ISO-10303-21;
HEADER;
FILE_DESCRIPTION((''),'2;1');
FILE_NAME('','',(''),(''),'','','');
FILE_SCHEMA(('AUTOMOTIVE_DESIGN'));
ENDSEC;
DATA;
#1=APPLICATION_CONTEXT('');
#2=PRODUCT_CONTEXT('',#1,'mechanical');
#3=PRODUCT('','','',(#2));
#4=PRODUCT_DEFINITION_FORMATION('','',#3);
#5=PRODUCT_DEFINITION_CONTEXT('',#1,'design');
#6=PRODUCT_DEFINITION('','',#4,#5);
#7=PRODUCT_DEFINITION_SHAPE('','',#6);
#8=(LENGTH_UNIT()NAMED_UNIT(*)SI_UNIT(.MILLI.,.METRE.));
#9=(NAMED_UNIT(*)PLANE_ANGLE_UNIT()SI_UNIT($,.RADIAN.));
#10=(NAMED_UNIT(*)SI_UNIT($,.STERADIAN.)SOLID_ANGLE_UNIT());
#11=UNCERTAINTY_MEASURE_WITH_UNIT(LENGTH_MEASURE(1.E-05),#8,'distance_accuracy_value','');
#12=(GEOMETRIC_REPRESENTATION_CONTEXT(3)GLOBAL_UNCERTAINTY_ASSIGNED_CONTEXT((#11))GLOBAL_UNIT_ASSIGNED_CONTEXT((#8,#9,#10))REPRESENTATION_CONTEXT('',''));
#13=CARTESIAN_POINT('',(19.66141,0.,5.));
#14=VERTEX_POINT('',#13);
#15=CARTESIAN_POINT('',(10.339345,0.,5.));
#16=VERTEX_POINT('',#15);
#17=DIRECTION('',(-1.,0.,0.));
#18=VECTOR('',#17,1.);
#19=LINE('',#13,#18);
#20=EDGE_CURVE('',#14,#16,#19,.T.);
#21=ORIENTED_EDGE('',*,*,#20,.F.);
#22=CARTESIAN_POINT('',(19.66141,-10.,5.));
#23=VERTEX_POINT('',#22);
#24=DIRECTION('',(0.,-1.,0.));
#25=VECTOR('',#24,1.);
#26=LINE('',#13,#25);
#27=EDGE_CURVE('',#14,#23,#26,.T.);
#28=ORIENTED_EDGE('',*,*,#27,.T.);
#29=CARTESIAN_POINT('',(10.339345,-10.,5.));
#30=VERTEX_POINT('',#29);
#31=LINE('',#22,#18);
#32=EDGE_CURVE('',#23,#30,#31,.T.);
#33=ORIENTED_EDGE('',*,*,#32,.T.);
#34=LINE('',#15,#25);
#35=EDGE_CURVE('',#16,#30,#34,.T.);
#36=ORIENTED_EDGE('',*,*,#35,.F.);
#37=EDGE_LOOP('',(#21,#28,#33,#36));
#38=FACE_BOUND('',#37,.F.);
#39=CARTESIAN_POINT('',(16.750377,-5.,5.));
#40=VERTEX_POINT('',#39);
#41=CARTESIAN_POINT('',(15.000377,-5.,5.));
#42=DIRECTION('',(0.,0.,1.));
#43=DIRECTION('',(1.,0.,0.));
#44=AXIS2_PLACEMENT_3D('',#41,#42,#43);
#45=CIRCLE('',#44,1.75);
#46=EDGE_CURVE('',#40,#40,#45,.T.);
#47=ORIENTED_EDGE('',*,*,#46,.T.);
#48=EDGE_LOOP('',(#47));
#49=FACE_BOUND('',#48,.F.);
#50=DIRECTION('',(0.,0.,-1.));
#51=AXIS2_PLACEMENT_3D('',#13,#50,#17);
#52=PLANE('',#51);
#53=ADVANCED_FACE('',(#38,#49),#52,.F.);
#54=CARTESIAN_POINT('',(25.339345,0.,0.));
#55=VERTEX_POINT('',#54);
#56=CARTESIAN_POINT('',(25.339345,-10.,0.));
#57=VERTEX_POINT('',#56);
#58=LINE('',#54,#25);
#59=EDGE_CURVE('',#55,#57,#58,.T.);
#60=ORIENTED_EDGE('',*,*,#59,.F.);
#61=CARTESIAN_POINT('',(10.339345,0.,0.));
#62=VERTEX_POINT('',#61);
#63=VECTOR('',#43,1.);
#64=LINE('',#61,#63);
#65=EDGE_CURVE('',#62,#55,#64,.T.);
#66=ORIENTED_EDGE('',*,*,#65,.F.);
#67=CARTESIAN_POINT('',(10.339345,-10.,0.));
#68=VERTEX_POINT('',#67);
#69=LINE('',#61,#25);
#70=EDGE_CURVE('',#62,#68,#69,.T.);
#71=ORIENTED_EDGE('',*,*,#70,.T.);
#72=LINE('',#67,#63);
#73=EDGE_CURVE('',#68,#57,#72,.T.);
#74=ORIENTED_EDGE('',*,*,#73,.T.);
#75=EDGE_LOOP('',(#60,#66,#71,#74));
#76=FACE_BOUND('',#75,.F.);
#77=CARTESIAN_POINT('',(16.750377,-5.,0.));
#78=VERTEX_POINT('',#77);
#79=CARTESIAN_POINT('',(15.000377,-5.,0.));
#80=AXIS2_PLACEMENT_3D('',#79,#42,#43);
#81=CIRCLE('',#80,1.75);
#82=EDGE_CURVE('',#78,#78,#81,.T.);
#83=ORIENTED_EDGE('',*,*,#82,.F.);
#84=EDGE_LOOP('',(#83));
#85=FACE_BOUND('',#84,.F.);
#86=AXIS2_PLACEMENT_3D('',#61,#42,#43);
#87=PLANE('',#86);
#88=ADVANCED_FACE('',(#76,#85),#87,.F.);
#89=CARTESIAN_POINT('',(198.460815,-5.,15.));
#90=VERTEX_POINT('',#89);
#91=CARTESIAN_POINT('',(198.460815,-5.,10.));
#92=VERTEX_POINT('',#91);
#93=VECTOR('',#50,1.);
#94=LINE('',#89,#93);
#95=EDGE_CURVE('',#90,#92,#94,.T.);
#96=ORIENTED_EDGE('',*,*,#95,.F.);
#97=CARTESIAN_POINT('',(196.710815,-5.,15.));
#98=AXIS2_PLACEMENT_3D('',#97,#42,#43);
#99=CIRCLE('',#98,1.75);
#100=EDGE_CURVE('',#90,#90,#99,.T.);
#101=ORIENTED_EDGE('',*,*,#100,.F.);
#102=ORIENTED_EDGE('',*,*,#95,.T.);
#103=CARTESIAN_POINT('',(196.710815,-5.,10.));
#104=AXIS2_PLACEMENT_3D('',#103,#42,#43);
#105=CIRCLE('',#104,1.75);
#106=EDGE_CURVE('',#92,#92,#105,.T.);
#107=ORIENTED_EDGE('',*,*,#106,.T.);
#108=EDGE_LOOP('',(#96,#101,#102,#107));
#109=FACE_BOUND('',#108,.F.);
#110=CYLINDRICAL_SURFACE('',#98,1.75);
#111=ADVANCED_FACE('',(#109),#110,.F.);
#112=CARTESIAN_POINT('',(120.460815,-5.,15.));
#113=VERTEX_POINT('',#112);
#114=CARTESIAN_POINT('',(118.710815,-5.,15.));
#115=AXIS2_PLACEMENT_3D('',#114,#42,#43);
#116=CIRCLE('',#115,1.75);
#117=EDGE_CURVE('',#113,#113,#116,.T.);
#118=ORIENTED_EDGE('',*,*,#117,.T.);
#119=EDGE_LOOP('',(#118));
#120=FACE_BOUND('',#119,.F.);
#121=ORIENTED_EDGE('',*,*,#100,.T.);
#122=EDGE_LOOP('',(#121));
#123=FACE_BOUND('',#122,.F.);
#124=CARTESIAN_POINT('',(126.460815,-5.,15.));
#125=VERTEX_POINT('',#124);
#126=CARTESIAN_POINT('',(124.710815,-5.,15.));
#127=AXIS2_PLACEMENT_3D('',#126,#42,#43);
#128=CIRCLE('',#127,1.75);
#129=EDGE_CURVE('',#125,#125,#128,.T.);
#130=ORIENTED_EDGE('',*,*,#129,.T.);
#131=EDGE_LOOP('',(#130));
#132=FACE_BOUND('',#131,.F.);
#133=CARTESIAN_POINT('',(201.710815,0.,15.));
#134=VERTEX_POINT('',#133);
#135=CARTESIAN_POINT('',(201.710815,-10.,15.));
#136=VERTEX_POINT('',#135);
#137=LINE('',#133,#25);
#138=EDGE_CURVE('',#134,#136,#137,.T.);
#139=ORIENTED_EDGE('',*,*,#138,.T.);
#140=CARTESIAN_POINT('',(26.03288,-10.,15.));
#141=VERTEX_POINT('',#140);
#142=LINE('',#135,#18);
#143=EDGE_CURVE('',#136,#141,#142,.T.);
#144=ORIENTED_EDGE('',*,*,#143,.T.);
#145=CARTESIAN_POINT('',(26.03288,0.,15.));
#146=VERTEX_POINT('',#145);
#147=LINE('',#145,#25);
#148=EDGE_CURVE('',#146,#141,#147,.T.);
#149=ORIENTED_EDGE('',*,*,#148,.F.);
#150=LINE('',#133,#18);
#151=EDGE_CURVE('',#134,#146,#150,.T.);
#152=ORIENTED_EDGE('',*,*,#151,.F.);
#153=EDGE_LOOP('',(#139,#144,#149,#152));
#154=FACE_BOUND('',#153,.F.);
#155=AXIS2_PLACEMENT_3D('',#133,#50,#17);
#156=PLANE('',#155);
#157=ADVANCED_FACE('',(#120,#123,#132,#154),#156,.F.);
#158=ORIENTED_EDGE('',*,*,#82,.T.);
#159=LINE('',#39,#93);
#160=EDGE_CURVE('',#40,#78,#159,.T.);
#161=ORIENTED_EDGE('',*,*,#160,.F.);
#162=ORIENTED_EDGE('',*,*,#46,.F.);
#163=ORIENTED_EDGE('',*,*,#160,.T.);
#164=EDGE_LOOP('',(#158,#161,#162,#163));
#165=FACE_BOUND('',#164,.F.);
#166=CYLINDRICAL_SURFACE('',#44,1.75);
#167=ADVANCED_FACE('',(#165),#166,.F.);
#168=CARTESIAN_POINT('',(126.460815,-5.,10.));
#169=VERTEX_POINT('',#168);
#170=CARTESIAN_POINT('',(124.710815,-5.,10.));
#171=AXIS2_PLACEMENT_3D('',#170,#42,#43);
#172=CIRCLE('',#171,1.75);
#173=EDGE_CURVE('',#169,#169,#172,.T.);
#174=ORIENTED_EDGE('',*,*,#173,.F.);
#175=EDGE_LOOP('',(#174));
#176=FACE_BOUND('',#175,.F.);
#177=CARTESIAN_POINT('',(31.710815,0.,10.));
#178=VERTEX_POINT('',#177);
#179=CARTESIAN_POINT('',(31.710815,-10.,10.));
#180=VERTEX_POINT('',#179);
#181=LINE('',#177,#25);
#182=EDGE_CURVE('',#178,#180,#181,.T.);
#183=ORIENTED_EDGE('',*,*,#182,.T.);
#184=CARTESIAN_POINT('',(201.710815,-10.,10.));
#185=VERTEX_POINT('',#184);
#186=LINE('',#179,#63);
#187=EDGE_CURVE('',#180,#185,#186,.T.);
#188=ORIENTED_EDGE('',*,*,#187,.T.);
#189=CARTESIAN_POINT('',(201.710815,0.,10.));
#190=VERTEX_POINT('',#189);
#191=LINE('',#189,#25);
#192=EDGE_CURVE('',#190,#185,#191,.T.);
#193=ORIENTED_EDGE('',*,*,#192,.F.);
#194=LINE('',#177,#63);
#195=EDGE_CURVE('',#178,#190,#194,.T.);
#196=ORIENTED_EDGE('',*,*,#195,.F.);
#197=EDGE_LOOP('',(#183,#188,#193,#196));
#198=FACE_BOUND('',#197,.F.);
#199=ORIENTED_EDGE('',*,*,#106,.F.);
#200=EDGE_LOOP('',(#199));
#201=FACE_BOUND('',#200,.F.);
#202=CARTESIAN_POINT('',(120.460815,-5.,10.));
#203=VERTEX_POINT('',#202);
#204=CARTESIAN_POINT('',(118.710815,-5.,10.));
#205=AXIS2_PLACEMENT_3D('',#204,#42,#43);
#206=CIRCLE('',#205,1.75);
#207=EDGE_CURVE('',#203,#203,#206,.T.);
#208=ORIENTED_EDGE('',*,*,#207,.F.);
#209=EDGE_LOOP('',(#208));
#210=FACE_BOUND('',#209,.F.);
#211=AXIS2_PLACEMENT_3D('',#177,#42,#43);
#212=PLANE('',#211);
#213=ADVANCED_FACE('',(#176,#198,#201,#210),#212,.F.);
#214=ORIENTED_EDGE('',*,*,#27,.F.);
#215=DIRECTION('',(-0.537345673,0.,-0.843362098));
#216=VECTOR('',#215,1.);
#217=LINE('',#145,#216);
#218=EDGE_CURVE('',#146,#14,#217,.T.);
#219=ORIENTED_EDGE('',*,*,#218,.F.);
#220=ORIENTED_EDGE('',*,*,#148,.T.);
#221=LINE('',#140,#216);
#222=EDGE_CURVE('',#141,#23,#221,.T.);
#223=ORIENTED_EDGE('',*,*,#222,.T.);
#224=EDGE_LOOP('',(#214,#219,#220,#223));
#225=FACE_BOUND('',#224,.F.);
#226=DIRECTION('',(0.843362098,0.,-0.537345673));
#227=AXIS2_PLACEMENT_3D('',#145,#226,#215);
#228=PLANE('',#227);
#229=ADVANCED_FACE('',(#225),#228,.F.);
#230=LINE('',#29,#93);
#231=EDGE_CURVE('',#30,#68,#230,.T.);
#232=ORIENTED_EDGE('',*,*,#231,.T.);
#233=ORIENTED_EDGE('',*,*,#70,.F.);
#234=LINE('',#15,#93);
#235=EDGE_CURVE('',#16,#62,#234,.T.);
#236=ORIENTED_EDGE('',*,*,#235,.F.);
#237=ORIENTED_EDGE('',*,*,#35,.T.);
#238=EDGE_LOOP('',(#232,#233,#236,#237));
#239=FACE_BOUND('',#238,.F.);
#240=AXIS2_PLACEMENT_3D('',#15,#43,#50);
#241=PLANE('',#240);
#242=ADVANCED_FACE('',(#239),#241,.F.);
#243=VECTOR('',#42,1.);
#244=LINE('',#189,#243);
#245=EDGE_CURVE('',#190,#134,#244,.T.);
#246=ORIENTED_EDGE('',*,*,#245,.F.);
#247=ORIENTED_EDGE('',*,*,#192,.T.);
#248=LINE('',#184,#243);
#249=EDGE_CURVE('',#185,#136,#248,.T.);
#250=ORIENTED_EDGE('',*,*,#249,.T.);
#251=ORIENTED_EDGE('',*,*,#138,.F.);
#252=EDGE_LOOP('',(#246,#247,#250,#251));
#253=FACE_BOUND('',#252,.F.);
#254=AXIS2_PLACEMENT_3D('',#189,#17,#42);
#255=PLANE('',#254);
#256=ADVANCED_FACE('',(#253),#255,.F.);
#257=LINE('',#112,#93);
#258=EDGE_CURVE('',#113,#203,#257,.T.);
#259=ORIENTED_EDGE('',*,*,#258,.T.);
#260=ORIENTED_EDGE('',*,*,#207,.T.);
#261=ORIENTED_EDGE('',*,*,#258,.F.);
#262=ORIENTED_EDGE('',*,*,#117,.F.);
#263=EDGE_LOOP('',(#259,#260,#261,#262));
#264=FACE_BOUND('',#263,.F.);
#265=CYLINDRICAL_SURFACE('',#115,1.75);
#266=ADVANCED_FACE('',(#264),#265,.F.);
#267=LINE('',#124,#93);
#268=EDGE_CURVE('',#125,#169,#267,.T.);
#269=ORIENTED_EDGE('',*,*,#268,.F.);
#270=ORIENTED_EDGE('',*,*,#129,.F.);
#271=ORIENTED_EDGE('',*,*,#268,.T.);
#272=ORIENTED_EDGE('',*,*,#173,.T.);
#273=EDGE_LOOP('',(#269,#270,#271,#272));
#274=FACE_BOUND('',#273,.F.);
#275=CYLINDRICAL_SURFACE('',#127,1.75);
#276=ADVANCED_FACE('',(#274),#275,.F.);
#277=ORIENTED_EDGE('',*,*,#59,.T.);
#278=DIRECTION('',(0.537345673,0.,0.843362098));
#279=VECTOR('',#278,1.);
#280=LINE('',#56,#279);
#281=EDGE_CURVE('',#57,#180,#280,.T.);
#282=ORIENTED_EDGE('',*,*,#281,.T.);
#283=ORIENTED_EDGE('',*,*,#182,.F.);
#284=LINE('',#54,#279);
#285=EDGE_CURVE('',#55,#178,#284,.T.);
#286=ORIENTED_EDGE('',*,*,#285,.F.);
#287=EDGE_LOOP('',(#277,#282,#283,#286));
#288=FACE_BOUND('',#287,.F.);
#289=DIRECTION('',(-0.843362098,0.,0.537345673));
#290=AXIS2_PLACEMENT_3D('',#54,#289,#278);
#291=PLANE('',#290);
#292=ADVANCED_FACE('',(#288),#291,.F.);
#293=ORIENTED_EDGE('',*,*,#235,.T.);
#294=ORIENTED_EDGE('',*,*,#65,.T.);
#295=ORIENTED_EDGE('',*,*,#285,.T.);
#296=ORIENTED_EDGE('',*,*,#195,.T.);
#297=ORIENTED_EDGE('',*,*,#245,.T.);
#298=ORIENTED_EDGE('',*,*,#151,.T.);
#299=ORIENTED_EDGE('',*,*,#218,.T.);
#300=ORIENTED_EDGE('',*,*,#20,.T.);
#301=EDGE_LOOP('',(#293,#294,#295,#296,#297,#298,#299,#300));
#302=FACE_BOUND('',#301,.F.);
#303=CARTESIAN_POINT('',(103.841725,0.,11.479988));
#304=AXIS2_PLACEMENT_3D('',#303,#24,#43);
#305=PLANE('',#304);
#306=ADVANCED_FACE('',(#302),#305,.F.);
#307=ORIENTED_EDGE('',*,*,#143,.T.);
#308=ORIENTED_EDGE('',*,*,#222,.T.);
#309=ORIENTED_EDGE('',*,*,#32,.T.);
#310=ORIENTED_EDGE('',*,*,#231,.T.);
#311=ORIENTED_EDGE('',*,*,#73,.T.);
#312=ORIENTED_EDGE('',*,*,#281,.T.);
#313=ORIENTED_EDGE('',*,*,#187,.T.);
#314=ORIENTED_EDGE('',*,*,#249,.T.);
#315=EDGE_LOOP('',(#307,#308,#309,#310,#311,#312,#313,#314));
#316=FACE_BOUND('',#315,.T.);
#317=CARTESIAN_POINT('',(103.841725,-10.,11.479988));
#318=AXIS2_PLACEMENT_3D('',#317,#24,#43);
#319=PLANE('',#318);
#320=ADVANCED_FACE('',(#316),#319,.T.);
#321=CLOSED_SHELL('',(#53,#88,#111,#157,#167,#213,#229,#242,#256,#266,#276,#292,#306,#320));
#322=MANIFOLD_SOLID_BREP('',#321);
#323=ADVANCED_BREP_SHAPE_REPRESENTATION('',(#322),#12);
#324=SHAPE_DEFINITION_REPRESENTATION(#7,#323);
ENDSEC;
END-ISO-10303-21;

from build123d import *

# Parameters (mm, degrees)
F1_DEPTH = 10
F2_R     = 1.75
F3_DEPTH = 15.001
F5_DEPTH = 5.001


# Not quite as in the source:
# - a feature names something its author has since deleted; it is built from what else it names


with BuildPart() as f1:
    # F0 (on Front) → F1 (new body)
    with BuildSketch(Plane.XZ):
        Polygon((31.7108153552, 10), (201.7108153552, 10), (201.7108153552, 15), (30.3418431431, 15), (26.0328800881, 15), (19.6614095846, 5), (10.3393448517, 5), (10.3393448517, 0), (25.3393448517, 0), align=None)
    extrude(amount=F1_DEPTH)

    # F2 (on face) → F3 (cut, through all)
    with BuildSketch(Plane.XY.offset(15)):
        with Locations((118.7108153552, -5)):
            Circle(F2_R)
        with Locations((124.7108153552, -5)):
            Circle(F2_R)
        with Locations((196.7108153552, -5)):
            Circle(F2_R)
    extrude(amount=-F3_DEPTH, mode=Mode.SUBTRACT)

    # F4 (on face) → F5 (cut, through all)
    with BuildSketch(Plane.XY.offset(5)):
        with BuildLine():
            ThreePointArc((13.2503772181, -5), (15.0003772181, -6.75), (16.7503772181, -5))
            ThreePointArc((16.7503772181, -5), (15.0003772181, -3.25), (13.2503772181, -5))
        make_face()
    extrude(amount=-F5_DEPTH, mode=Mode.SUBTRACT)


solid = f1.part
